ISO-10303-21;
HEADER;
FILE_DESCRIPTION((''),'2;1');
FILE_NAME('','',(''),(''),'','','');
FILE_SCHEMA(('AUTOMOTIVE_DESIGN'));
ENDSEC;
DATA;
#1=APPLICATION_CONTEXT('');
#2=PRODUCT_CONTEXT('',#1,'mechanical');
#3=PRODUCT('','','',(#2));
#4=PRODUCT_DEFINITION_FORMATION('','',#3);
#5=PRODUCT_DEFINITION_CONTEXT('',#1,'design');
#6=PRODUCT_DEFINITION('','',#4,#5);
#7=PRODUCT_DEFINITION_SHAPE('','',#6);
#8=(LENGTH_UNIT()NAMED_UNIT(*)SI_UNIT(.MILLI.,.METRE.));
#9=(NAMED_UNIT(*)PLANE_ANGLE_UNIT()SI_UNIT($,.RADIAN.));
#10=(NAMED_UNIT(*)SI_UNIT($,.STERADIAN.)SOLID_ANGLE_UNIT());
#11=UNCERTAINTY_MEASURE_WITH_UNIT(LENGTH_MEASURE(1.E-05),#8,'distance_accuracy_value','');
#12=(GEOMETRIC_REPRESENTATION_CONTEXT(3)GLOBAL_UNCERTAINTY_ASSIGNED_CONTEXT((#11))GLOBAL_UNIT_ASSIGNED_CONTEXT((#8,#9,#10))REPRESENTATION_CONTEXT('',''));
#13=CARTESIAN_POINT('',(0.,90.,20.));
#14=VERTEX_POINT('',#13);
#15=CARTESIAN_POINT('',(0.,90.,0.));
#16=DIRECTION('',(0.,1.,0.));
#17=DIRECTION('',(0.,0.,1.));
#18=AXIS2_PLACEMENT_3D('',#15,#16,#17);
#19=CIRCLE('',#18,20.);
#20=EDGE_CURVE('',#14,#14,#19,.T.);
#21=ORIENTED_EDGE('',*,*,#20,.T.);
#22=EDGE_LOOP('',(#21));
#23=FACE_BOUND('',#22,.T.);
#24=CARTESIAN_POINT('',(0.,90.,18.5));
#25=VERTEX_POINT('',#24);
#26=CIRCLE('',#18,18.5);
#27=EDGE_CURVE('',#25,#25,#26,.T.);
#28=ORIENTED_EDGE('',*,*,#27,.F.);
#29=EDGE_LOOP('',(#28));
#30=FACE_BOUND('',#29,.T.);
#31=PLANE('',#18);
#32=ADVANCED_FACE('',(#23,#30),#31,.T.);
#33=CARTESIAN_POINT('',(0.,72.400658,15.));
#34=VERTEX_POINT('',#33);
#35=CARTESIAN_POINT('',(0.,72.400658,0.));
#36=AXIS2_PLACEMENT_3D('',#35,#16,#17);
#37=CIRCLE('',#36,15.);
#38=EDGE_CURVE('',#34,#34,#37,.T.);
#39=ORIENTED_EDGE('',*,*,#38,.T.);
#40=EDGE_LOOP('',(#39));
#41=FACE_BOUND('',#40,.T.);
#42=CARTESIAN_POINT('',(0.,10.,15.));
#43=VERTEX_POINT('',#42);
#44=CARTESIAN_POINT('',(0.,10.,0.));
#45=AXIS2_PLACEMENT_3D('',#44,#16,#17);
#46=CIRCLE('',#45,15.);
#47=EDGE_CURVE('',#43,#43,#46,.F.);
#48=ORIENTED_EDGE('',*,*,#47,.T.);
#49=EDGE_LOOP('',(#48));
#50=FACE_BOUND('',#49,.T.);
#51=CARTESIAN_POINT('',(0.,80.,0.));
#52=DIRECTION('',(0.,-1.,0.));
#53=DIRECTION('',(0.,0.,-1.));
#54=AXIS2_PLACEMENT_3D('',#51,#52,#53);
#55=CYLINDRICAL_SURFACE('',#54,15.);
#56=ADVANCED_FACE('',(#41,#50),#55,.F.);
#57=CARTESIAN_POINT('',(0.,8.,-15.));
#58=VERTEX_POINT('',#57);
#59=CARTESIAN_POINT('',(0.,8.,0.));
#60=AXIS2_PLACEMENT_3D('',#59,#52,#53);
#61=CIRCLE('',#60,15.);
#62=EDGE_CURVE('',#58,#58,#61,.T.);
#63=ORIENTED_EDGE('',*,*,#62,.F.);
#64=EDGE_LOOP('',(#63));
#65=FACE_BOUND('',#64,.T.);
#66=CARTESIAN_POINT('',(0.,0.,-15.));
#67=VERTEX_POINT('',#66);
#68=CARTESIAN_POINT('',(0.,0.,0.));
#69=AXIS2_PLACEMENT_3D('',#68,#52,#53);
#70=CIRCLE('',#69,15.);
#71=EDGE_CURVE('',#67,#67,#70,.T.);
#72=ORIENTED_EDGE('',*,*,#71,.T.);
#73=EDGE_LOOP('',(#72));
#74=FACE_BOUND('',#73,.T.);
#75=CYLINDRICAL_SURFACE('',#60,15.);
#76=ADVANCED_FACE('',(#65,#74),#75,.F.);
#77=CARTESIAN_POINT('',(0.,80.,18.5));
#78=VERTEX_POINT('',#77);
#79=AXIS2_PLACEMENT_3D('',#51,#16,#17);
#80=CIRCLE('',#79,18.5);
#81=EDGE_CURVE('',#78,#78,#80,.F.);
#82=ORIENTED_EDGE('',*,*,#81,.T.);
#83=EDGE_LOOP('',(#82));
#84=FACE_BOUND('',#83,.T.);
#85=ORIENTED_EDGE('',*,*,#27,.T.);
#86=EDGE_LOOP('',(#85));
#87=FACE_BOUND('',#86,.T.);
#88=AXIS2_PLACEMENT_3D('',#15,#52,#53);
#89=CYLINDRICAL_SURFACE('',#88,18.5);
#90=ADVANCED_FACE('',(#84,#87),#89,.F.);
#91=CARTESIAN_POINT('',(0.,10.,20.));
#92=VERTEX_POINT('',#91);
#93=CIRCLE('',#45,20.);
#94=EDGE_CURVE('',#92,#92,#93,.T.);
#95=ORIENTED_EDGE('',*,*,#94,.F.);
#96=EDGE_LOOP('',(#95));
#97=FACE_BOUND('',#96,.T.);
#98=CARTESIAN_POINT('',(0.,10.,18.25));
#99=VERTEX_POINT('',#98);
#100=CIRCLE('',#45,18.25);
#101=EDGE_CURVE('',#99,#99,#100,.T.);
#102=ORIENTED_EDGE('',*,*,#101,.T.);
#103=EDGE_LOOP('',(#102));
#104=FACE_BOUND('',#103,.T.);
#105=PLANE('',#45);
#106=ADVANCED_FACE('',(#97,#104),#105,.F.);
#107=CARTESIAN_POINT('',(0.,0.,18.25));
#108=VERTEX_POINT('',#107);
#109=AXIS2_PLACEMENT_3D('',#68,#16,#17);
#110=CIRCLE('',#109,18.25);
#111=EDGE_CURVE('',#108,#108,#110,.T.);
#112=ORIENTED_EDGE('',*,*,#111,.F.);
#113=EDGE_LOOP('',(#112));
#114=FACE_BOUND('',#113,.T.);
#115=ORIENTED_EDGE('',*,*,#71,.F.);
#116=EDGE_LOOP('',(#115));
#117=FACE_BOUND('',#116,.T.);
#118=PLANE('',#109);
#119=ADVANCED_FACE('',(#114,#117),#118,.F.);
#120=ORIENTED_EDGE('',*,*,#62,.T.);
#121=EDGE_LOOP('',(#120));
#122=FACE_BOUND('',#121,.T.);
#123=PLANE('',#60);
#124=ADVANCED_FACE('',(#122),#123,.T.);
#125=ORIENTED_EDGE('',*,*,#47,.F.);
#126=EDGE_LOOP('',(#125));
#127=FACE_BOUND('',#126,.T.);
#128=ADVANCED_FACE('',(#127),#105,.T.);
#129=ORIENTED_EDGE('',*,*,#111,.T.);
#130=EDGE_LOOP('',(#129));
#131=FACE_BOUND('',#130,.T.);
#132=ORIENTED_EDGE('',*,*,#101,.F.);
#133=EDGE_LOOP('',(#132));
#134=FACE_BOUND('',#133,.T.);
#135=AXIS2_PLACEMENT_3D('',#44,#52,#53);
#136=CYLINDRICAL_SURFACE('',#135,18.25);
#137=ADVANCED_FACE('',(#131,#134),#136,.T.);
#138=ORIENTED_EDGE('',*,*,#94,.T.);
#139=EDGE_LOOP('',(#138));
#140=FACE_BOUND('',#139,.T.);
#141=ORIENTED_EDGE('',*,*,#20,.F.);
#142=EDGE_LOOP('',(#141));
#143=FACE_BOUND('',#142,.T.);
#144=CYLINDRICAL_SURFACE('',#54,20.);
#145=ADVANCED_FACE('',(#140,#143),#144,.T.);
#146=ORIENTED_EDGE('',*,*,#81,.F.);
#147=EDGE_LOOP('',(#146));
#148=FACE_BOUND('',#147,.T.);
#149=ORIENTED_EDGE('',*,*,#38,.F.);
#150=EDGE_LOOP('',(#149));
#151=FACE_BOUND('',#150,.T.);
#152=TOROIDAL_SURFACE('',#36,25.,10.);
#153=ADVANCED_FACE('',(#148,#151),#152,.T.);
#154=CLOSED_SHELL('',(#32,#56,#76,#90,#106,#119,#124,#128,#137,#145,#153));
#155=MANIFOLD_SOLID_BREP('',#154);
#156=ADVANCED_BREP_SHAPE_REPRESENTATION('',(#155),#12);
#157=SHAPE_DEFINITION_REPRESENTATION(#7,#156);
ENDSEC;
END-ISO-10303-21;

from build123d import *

# Parameters (mm, degrees)
SKETCH_1_R          = 18.25
EXTRUDE_1_DEPTH     = 10
SKETCH_3_R          = 15
CUT_EXTRUDE_1_DEPTH = 8
SKETCH_4_R          = 20
SKETCH_4_R_2        = 15
EXTRUDE_2_DEPTH     = 70
SKETCH_5_R          = 20
SKETCH_5_R_2        = 18.5
EXTRUDE_3_DEPTH     = 10
FILLET_1_R          = 10


with BuildPart() as part:
    # 草图1 → 凸台-拉伸1 (new body)
    with BuildSketch(Plane(origin=(0, 0, 0), x_dir=(1, 0, 0), z_dir=(0, 1, 0))):
        with Locations(Location((0, 0, 0), (0, 0, 270))):
            Circle(SKETCH_1_R)
    extrude(amount=EXTRUDE_1_DEPTH)

    # 草图3 → 切除-拉伸1 (cut)
    with BuildSketch(Plane.XZ):
        with Locations(Location((0, 0, 0), (0, 0, 270))):
            Circle(SKETCH_3_R)
    extrude(amount=-CUT_EXTRUDE_1_DEPTH, mode=Mode.SUBTRACT)

    # 草图4 → 凸台-拉伸2 (add)
    with BuildSketch(Plane(origin=(0, 10, 0), x_dir=(1, 0, 0), z_dir=(0, 1, 0))):
        with Locations(Location((0, 0, 0), (0, 0, 270))):
            Circle(SKETCH_4_R)
        with Locations(Location((0, 0, 0), (0, 0, 90))):
            Circle(SKETCH_4_R_2, mode=Mode.SUBTRACT)
    extrude(amount=EXTRUDE_2_DEPTH)

    # 草图5 → 凸台-拉伸3 (add)
    with BuildSketch(Plane(origin=(0, 80, 0), x_dir=(1, 0, 0), z_dir=(0, 1, 0))):
        with Locations(Location((0, 0, 0), (0, 0, 270))):
            Circle(SKETCH_5_R)
        with Locations(Location((0, 0, 0), (0, 0, 270))):
            Circle(SKETCH_5_R_2, mode=Mode.SUBTRACT)
    extrude(amount=EXTRUDE_3_DEPTH)

    # 圆角1
    # the kernel refuses this fillet: 10 mm, written as the material it takes off along each edge
    with BuildSketch(Plane(origin=(0, 80, 0), x_dir=(0, 0, -1), z_dir=(1, 0, 0))) as fillet_1_piece_1:
        with BuildLine():
            CenterArc((25, -7.599342077), FILLET_1_R, 130.541601874, 49.458398126)
            Line((15, -7.599342077), (14.8, -7.599342077))
            Line((14.8, -7.599342077), (14.8, 0))
            Line((14.8, 0), (15, 0.2))
            ThreePointArc((15, 0.2), (16.75, 0.2), (18.37, 0.151986842))
            Line((18.37, 0.151986842), (18.5, 0))
        make_face()
    revolve(axis=Axis((0, 80, 0), (0, 1, 0)), mode=Mode.SUBTRACT)


solid = part.part
